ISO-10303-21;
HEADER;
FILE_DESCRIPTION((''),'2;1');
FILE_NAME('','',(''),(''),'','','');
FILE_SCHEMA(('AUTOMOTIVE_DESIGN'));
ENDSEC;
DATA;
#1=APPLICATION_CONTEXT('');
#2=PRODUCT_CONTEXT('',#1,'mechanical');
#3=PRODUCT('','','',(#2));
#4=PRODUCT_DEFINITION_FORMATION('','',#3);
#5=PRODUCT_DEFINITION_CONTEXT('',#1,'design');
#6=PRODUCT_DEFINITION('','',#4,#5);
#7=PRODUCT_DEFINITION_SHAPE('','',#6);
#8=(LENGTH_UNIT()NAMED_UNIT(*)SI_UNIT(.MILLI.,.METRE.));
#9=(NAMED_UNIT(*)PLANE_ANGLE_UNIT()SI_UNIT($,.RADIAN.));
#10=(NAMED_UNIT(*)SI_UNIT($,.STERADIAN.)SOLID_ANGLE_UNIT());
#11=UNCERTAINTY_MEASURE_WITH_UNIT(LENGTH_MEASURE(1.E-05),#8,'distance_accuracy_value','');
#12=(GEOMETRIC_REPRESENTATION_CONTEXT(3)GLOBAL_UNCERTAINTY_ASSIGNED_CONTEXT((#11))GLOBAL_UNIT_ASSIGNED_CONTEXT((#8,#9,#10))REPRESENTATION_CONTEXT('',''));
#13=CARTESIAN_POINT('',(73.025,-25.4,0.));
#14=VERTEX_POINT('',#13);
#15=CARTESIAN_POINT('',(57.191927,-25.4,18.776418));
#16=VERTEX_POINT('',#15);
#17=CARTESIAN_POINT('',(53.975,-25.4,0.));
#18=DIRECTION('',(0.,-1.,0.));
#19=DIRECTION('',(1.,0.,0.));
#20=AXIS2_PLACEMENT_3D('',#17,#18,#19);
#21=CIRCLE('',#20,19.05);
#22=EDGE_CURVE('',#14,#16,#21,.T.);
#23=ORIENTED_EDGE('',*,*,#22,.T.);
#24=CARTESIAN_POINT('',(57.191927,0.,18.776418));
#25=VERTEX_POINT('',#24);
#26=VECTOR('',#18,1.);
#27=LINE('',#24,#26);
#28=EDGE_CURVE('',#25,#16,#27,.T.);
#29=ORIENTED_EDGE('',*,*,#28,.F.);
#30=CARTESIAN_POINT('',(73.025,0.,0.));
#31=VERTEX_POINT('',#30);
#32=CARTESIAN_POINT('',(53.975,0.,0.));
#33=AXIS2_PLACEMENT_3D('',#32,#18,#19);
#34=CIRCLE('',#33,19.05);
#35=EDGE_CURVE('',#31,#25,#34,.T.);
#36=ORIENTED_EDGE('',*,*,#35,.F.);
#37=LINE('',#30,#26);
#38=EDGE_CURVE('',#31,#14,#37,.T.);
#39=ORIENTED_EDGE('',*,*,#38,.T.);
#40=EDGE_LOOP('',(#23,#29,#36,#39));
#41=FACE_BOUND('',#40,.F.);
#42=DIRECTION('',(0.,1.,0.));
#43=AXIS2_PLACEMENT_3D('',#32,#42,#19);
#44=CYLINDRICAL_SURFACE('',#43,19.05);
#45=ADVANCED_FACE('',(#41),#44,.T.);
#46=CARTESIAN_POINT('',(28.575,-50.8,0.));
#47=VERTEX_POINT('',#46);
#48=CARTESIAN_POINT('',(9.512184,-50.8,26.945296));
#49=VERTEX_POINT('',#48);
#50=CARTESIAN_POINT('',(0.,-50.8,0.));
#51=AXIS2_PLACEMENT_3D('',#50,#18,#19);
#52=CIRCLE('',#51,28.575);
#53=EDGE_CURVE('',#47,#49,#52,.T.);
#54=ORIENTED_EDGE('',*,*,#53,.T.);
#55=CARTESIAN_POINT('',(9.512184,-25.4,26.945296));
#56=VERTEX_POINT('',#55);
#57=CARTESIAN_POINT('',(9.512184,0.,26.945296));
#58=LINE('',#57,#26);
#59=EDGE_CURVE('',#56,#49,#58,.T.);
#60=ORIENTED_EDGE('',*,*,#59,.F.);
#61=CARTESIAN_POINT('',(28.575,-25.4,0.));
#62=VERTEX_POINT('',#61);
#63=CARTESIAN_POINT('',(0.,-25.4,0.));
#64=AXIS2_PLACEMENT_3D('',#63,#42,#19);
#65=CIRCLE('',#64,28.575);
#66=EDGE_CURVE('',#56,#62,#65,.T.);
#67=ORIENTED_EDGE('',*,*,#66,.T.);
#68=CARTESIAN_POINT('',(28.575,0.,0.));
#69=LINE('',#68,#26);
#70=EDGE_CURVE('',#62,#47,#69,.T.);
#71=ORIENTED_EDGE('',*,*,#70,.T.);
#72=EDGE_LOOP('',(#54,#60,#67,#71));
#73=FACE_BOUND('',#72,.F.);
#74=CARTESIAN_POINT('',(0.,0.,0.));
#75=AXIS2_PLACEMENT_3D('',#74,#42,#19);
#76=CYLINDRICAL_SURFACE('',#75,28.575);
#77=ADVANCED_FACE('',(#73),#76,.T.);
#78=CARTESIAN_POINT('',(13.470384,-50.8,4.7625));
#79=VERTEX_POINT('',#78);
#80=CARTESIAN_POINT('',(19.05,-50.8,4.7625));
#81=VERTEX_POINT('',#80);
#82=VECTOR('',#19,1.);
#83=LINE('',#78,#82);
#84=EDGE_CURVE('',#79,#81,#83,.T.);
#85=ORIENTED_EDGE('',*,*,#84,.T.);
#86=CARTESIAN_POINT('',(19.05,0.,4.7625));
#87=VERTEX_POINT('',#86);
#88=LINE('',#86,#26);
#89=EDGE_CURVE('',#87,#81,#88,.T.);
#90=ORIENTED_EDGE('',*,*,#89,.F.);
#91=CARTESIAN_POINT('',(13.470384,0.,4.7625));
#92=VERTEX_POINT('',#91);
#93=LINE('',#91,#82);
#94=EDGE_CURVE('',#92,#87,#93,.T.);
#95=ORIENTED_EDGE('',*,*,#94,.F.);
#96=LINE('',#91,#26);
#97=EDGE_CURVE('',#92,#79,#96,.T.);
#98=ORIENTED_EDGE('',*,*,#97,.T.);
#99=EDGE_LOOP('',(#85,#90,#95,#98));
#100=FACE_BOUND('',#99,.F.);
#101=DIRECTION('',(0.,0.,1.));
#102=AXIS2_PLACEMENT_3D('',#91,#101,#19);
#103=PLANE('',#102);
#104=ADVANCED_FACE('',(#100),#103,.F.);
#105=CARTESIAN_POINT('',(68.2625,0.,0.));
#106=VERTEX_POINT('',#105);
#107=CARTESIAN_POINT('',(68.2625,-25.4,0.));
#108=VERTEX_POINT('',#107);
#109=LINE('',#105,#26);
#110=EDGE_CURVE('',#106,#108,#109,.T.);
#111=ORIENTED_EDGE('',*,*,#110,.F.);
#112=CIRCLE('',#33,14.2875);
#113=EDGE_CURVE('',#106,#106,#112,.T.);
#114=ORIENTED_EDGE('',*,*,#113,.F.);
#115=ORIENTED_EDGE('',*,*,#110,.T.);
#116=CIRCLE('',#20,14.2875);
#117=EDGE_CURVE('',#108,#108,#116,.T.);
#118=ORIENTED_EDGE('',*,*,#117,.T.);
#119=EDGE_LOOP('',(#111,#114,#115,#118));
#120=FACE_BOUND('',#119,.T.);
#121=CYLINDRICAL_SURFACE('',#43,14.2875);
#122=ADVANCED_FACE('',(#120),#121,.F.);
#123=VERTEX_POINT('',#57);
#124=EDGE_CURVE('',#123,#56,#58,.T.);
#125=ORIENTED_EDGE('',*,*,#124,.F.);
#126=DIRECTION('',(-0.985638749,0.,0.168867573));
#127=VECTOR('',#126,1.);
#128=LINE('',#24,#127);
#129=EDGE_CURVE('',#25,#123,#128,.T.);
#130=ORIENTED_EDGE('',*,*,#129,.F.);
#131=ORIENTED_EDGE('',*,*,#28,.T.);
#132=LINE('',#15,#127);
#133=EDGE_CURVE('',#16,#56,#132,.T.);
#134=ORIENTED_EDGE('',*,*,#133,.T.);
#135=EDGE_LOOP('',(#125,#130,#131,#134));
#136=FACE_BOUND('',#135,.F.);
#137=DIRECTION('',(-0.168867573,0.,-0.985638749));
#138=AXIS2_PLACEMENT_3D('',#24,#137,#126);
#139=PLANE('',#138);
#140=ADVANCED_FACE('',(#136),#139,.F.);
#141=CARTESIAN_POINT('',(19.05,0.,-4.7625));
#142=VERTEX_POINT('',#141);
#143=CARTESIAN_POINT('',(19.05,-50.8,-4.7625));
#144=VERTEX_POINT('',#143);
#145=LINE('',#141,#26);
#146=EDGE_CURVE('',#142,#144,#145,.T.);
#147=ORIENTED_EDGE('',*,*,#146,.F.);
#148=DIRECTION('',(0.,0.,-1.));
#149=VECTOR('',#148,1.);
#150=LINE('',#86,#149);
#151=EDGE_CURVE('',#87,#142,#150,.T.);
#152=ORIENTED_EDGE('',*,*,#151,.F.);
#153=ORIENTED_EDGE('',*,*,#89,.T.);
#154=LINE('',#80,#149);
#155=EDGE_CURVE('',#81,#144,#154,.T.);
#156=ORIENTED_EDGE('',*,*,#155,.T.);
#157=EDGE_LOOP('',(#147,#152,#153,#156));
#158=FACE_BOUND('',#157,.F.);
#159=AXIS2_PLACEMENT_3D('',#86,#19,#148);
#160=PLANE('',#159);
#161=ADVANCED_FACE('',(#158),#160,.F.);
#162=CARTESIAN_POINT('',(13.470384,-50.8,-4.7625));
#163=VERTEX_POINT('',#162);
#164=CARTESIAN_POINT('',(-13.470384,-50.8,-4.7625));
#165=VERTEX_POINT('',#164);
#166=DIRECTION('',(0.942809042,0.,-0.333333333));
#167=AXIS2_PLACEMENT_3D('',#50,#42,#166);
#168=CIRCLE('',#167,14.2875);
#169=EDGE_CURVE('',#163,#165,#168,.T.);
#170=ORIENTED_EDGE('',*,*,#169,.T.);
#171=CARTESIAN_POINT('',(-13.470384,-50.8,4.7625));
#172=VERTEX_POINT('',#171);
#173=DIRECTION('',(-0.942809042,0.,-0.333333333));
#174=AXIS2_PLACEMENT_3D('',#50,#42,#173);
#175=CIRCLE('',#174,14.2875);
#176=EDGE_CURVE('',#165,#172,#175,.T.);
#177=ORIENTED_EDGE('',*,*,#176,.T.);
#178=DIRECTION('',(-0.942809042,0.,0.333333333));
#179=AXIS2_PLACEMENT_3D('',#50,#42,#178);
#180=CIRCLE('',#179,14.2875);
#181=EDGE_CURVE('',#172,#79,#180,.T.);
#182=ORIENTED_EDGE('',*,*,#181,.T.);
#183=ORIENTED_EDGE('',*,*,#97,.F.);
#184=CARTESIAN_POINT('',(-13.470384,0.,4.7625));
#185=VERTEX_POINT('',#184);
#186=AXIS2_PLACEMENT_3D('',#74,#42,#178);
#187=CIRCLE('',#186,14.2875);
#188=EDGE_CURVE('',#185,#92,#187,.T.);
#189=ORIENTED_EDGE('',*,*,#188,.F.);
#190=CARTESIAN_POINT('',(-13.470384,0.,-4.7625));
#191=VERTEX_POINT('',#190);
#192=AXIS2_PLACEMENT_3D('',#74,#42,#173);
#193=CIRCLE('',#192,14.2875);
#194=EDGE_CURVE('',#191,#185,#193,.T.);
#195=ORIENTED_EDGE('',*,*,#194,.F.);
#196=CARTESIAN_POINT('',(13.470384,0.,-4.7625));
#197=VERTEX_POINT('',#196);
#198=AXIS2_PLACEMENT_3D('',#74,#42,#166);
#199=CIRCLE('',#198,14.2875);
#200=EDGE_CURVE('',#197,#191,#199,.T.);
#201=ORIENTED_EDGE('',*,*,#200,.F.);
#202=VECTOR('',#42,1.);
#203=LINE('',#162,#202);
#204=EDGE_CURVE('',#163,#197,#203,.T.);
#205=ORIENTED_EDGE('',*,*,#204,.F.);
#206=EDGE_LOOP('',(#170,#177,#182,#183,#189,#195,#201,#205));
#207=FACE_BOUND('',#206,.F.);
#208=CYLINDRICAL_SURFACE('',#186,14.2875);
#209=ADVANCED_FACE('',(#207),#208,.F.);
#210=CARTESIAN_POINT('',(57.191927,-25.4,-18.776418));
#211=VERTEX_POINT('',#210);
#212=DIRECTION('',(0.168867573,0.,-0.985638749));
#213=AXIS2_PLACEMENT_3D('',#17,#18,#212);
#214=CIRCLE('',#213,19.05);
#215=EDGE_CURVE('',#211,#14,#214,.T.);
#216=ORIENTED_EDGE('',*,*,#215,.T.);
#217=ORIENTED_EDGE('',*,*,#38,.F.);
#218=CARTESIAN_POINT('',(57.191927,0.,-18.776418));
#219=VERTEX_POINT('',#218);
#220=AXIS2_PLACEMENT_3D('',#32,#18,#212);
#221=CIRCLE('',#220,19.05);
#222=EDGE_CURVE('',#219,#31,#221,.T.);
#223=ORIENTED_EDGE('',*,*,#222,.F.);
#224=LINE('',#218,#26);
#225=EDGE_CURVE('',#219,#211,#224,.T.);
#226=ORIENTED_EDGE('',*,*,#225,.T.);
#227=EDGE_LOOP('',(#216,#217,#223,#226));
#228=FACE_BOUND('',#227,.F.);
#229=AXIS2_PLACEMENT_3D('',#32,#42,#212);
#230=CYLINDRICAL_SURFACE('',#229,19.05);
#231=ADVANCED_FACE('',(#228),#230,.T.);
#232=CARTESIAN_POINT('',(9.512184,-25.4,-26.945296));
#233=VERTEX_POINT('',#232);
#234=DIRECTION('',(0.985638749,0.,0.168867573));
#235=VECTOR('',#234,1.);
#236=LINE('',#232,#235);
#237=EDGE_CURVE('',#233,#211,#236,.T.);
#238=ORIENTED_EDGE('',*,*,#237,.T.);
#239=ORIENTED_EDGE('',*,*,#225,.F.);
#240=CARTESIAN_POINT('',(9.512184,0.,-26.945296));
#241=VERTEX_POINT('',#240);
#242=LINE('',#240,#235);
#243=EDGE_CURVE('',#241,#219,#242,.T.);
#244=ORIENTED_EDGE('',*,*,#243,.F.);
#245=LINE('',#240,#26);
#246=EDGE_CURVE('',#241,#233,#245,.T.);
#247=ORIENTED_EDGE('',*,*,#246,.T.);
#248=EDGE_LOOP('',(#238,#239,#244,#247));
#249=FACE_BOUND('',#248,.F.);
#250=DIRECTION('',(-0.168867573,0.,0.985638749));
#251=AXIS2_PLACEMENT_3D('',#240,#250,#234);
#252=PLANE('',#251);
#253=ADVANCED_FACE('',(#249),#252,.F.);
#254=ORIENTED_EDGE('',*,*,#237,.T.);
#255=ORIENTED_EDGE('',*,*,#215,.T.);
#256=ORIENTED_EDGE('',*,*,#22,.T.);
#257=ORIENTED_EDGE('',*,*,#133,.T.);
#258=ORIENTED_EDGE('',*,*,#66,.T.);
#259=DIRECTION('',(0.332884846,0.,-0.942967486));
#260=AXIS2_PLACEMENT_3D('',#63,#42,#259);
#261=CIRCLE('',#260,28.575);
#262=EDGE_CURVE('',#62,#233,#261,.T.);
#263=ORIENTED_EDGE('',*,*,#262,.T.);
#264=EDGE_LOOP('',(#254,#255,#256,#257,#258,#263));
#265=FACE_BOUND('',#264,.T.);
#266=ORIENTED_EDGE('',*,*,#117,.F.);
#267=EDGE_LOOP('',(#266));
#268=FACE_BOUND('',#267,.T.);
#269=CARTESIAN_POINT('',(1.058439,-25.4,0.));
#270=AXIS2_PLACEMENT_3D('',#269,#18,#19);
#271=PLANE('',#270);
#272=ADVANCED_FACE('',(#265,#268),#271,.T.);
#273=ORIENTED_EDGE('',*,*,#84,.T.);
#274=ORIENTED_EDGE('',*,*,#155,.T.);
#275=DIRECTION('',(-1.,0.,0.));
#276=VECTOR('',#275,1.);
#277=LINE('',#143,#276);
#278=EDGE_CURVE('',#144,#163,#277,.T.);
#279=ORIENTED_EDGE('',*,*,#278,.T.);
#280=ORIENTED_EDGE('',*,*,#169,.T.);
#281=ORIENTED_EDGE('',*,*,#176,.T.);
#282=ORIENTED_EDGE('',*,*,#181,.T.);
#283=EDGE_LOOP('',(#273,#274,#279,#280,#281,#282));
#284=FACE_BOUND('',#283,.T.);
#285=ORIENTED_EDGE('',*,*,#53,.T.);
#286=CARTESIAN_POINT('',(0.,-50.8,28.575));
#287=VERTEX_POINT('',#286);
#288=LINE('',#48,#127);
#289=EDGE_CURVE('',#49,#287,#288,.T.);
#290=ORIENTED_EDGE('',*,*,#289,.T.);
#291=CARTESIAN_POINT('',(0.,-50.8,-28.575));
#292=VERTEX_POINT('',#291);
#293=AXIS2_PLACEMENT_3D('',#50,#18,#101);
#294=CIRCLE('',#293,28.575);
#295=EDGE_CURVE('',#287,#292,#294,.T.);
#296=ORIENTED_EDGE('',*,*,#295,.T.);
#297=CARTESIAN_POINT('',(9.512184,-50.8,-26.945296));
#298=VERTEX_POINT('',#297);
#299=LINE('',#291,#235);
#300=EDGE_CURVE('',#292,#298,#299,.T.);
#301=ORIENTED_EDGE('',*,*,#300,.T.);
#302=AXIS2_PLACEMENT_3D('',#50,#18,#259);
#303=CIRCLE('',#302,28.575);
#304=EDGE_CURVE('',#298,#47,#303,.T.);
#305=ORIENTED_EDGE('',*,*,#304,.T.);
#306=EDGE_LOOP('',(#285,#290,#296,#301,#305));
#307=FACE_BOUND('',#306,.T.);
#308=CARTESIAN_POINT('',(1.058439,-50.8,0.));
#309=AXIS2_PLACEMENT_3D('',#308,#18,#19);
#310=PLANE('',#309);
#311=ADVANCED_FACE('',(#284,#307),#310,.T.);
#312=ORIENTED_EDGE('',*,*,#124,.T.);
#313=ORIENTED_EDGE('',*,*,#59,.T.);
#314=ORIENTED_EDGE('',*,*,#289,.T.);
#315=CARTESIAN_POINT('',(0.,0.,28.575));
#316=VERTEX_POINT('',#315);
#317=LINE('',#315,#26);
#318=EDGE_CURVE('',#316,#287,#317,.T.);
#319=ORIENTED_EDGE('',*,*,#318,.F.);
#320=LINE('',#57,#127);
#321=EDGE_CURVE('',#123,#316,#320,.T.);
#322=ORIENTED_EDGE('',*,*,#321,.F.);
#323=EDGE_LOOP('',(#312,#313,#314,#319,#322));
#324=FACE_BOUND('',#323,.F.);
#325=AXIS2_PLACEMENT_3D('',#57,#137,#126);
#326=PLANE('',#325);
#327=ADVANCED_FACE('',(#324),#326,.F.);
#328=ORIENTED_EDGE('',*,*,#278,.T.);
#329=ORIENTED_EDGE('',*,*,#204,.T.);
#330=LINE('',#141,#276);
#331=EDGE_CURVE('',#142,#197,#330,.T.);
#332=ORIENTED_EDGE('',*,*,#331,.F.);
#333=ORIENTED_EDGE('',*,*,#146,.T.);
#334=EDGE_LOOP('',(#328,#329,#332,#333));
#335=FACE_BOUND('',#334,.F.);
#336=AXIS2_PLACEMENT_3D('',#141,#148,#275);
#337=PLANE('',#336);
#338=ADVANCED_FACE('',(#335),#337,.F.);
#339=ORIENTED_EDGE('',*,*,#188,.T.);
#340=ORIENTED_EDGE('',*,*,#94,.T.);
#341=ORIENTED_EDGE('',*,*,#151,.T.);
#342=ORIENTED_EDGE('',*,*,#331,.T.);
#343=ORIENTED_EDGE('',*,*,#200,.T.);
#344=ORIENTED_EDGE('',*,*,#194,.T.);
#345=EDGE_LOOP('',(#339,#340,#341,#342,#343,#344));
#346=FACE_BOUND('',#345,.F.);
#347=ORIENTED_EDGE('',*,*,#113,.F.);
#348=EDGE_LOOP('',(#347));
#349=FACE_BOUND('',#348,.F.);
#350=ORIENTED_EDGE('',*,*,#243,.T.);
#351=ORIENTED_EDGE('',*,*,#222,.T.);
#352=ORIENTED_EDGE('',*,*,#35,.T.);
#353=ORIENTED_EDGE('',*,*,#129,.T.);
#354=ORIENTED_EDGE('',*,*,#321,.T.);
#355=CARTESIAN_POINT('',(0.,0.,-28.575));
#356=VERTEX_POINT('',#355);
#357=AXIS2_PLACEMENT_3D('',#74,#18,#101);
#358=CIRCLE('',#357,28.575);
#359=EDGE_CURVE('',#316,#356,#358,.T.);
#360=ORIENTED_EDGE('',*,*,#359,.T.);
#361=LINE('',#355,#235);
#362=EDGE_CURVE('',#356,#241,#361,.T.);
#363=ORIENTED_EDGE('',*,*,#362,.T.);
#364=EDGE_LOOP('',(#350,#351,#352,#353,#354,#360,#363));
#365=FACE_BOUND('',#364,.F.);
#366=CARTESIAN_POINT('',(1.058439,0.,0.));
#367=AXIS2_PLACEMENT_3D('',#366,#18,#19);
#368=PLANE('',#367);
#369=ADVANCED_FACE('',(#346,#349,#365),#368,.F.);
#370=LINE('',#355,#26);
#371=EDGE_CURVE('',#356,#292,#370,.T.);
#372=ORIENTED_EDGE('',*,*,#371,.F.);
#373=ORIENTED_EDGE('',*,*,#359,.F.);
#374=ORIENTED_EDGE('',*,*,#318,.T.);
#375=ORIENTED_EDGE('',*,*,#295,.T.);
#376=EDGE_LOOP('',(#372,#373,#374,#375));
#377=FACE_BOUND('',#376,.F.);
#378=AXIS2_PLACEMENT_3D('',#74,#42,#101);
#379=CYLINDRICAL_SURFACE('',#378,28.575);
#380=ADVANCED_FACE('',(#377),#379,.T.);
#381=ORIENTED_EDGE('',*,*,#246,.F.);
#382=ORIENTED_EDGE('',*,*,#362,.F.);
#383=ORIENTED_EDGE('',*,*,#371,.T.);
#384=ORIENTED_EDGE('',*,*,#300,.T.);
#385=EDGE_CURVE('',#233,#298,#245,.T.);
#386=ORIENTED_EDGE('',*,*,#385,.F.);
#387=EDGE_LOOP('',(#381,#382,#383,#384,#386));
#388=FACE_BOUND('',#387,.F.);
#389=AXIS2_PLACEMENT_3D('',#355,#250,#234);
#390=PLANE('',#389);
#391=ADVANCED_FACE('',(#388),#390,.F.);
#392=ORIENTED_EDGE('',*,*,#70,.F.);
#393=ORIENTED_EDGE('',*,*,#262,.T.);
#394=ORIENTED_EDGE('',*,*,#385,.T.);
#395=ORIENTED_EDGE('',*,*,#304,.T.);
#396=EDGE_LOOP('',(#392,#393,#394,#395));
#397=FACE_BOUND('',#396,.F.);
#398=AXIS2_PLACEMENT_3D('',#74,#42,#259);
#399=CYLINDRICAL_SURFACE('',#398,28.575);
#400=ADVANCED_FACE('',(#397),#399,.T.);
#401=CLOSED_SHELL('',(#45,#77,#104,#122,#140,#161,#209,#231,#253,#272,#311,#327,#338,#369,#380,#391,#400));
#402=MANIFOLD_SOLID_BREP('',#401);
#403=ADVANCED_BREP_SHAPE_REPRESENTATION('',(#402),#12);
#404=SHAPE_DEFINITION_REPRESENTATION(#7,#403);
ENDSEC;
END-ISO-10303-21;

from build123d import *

# Parameters (mm, degrees)
F0_R     = 14.2875
F1_DEPTH = 25.4
F2_DEPTH = 50.8


with BuildPart() as f1:
    # F0 (on Front) → F1 (new body)
    with BuildSketch(Plane.XZ):
        with BuildLine():
            Line((9.5121844836, 26.9452959039), (0, 28.575))
            ThreePointArc((0, 28.575), (-28.575, 0), (0, -28.575))
            Line((0, -28.575), (9.5121844836, -26.9452959039))
            ThreePointArc((9.5121844836, -26.9452959039), (23.3274655355, -16.5033322905), (28.575, 0))
            ThreePointArc((28.575, 0), (23.3274655355, 16.5033322905), (9.5121844836, 26.9452959039))
        make_face()
        with BuildLine():
            ThreePointArc((-13.4703841816, 4.7625), (0, 14.2875), (13.4703841816, 4.7625))
            Line((13.4703841816, 4.7625), (19.05, 4.7625))
            Line((19.05, 4.7625), (19.05, -4.7625))
            Line((19.05, -4.7625), (13.4703841816, -4.7625))
            ThreePointArc((13.4703841816, -4.7625), (0, -14.2875), (-13.4703841816, -4.7625))
            Line((-13.4703841816, -4.7625), (-19.05, -4.7625))
            Line((-19.05, -4.7625), (-19.05, 4.7625))
            Line((-19.05, 4.7625), (-13.4703841816, 4.7625))
        make_face(mode=Mode.SUBTRACT)
        with BuildLine():
            Line((57.1919272622, 18.7764181619), (9.5121844836, 26.9452959039))
            ThreePointArc((9.5121844836, 26.9452959039), (23.3274655355, 16.5033322905), (28.575, 0))
            ThreePointArc((28.575, 0), (23.3274655355, -16.5033322905), (9.5121844836, -26.9452959039))
            Line((9.5121844836, -26.9452959039), (57.1919272622, -18.7764181619))
            ThreePointArc((57.1919272622, -18.7764181619), (34.925, 0), (57.1919272622, 18.7764181619))
        make_face()
        with BuildLine():
            ThreePointArc((73.025, 0), (68.5383952831, 12.2804730295), (57.1919272622, 18.7764181619))
            ThreePointArc((57.1919272622, 18.7764181619), (34.925, 0), (57.1919272622, -18.7764181619))
            ThreePointArc((57.1919272622, -18.7764181619), (68.5383952831, -12.2804730295), (73.025, 0))
        make_face()
        with Locations((53.975, 0)):
            Circle(F0_R, mode=Mode.SUBTRACT)
        with BuildLine():
            ThreePointArc((-13.4703841816, -4.7625), (-14.2875, 0), (-13.4703841816, 4.7625))
            Line((-13.4703841816, 4.7625), (-19.05, 4.7625))
            Line((-19.05, 4.7625), (-19.05, -4.7625))
            Line((-19.05, -4.7625), (-13.4703841816, -4.7625))
        make_face()
    extrude(amount=F1_DEPTH)

    # F0 (on Front) → F2 (join)
    with BuildSketch(Plane.XZ):
        with BuildLine():
            Line((9.5121844836, 26.9452959039), (0, 28.575))
            ThreePointArc((0, 28.575), (-28.575, 0), (0, -28.575))
            Line((0, -28.575), (9.5121844836, -26.9452959039))
            ThreePointArc((9.5121844836, -26.9452959039), (23.3274655355, -16.5033322905), (28.575, 0))
            ThreePointArc((28.575, 0), (23.3274655355, 16.5033322905), (9.5121844836, 26.9452959039))
        make_face()
        with BuildLine():
            ThreePointArc((-13.4703841816, 4.7625), (0, 14.2875), (13.4703841816, 4.7625))
            Line((13.4703841816, 4.7625), (19.05, 4.7625))
            Line((19.05, 4.7625), (19.05, -4.7625))
            Line((19.05, -4.7625), (13.4703841816, -4.7625))
            ThreePointArc((13.4703841816, -4.7625), (0, -14.2875), (-13.4703841816, -4.7625))
            Line((-13.4703841816, -4.7625), (-19.05, -4.7625))
            Line((-19.05, -4.7625), (-19.05, 4.7625))
            Line((-19.05, 4.7625), (-13.4703841816, 4.7625))
        make_face(mode=Mode.SUBTRACT)
        with BuildLine():
            ThreePointArc((-13.4703841816, -4.7625), (-14.2875, 0), (-13.4703841816, 4.7625))
            Line((-13.4703841816, 4.7625), (-19.05, 4.7625))
            Line((-19.05, 4.7625), (-19.05, -4.7625))
            Line((-19.05, -4.7625), (-13.4703841816, -4.7625))
        make_face()
    extrude(amount=F2_DEPTH)


solid = f1.part
